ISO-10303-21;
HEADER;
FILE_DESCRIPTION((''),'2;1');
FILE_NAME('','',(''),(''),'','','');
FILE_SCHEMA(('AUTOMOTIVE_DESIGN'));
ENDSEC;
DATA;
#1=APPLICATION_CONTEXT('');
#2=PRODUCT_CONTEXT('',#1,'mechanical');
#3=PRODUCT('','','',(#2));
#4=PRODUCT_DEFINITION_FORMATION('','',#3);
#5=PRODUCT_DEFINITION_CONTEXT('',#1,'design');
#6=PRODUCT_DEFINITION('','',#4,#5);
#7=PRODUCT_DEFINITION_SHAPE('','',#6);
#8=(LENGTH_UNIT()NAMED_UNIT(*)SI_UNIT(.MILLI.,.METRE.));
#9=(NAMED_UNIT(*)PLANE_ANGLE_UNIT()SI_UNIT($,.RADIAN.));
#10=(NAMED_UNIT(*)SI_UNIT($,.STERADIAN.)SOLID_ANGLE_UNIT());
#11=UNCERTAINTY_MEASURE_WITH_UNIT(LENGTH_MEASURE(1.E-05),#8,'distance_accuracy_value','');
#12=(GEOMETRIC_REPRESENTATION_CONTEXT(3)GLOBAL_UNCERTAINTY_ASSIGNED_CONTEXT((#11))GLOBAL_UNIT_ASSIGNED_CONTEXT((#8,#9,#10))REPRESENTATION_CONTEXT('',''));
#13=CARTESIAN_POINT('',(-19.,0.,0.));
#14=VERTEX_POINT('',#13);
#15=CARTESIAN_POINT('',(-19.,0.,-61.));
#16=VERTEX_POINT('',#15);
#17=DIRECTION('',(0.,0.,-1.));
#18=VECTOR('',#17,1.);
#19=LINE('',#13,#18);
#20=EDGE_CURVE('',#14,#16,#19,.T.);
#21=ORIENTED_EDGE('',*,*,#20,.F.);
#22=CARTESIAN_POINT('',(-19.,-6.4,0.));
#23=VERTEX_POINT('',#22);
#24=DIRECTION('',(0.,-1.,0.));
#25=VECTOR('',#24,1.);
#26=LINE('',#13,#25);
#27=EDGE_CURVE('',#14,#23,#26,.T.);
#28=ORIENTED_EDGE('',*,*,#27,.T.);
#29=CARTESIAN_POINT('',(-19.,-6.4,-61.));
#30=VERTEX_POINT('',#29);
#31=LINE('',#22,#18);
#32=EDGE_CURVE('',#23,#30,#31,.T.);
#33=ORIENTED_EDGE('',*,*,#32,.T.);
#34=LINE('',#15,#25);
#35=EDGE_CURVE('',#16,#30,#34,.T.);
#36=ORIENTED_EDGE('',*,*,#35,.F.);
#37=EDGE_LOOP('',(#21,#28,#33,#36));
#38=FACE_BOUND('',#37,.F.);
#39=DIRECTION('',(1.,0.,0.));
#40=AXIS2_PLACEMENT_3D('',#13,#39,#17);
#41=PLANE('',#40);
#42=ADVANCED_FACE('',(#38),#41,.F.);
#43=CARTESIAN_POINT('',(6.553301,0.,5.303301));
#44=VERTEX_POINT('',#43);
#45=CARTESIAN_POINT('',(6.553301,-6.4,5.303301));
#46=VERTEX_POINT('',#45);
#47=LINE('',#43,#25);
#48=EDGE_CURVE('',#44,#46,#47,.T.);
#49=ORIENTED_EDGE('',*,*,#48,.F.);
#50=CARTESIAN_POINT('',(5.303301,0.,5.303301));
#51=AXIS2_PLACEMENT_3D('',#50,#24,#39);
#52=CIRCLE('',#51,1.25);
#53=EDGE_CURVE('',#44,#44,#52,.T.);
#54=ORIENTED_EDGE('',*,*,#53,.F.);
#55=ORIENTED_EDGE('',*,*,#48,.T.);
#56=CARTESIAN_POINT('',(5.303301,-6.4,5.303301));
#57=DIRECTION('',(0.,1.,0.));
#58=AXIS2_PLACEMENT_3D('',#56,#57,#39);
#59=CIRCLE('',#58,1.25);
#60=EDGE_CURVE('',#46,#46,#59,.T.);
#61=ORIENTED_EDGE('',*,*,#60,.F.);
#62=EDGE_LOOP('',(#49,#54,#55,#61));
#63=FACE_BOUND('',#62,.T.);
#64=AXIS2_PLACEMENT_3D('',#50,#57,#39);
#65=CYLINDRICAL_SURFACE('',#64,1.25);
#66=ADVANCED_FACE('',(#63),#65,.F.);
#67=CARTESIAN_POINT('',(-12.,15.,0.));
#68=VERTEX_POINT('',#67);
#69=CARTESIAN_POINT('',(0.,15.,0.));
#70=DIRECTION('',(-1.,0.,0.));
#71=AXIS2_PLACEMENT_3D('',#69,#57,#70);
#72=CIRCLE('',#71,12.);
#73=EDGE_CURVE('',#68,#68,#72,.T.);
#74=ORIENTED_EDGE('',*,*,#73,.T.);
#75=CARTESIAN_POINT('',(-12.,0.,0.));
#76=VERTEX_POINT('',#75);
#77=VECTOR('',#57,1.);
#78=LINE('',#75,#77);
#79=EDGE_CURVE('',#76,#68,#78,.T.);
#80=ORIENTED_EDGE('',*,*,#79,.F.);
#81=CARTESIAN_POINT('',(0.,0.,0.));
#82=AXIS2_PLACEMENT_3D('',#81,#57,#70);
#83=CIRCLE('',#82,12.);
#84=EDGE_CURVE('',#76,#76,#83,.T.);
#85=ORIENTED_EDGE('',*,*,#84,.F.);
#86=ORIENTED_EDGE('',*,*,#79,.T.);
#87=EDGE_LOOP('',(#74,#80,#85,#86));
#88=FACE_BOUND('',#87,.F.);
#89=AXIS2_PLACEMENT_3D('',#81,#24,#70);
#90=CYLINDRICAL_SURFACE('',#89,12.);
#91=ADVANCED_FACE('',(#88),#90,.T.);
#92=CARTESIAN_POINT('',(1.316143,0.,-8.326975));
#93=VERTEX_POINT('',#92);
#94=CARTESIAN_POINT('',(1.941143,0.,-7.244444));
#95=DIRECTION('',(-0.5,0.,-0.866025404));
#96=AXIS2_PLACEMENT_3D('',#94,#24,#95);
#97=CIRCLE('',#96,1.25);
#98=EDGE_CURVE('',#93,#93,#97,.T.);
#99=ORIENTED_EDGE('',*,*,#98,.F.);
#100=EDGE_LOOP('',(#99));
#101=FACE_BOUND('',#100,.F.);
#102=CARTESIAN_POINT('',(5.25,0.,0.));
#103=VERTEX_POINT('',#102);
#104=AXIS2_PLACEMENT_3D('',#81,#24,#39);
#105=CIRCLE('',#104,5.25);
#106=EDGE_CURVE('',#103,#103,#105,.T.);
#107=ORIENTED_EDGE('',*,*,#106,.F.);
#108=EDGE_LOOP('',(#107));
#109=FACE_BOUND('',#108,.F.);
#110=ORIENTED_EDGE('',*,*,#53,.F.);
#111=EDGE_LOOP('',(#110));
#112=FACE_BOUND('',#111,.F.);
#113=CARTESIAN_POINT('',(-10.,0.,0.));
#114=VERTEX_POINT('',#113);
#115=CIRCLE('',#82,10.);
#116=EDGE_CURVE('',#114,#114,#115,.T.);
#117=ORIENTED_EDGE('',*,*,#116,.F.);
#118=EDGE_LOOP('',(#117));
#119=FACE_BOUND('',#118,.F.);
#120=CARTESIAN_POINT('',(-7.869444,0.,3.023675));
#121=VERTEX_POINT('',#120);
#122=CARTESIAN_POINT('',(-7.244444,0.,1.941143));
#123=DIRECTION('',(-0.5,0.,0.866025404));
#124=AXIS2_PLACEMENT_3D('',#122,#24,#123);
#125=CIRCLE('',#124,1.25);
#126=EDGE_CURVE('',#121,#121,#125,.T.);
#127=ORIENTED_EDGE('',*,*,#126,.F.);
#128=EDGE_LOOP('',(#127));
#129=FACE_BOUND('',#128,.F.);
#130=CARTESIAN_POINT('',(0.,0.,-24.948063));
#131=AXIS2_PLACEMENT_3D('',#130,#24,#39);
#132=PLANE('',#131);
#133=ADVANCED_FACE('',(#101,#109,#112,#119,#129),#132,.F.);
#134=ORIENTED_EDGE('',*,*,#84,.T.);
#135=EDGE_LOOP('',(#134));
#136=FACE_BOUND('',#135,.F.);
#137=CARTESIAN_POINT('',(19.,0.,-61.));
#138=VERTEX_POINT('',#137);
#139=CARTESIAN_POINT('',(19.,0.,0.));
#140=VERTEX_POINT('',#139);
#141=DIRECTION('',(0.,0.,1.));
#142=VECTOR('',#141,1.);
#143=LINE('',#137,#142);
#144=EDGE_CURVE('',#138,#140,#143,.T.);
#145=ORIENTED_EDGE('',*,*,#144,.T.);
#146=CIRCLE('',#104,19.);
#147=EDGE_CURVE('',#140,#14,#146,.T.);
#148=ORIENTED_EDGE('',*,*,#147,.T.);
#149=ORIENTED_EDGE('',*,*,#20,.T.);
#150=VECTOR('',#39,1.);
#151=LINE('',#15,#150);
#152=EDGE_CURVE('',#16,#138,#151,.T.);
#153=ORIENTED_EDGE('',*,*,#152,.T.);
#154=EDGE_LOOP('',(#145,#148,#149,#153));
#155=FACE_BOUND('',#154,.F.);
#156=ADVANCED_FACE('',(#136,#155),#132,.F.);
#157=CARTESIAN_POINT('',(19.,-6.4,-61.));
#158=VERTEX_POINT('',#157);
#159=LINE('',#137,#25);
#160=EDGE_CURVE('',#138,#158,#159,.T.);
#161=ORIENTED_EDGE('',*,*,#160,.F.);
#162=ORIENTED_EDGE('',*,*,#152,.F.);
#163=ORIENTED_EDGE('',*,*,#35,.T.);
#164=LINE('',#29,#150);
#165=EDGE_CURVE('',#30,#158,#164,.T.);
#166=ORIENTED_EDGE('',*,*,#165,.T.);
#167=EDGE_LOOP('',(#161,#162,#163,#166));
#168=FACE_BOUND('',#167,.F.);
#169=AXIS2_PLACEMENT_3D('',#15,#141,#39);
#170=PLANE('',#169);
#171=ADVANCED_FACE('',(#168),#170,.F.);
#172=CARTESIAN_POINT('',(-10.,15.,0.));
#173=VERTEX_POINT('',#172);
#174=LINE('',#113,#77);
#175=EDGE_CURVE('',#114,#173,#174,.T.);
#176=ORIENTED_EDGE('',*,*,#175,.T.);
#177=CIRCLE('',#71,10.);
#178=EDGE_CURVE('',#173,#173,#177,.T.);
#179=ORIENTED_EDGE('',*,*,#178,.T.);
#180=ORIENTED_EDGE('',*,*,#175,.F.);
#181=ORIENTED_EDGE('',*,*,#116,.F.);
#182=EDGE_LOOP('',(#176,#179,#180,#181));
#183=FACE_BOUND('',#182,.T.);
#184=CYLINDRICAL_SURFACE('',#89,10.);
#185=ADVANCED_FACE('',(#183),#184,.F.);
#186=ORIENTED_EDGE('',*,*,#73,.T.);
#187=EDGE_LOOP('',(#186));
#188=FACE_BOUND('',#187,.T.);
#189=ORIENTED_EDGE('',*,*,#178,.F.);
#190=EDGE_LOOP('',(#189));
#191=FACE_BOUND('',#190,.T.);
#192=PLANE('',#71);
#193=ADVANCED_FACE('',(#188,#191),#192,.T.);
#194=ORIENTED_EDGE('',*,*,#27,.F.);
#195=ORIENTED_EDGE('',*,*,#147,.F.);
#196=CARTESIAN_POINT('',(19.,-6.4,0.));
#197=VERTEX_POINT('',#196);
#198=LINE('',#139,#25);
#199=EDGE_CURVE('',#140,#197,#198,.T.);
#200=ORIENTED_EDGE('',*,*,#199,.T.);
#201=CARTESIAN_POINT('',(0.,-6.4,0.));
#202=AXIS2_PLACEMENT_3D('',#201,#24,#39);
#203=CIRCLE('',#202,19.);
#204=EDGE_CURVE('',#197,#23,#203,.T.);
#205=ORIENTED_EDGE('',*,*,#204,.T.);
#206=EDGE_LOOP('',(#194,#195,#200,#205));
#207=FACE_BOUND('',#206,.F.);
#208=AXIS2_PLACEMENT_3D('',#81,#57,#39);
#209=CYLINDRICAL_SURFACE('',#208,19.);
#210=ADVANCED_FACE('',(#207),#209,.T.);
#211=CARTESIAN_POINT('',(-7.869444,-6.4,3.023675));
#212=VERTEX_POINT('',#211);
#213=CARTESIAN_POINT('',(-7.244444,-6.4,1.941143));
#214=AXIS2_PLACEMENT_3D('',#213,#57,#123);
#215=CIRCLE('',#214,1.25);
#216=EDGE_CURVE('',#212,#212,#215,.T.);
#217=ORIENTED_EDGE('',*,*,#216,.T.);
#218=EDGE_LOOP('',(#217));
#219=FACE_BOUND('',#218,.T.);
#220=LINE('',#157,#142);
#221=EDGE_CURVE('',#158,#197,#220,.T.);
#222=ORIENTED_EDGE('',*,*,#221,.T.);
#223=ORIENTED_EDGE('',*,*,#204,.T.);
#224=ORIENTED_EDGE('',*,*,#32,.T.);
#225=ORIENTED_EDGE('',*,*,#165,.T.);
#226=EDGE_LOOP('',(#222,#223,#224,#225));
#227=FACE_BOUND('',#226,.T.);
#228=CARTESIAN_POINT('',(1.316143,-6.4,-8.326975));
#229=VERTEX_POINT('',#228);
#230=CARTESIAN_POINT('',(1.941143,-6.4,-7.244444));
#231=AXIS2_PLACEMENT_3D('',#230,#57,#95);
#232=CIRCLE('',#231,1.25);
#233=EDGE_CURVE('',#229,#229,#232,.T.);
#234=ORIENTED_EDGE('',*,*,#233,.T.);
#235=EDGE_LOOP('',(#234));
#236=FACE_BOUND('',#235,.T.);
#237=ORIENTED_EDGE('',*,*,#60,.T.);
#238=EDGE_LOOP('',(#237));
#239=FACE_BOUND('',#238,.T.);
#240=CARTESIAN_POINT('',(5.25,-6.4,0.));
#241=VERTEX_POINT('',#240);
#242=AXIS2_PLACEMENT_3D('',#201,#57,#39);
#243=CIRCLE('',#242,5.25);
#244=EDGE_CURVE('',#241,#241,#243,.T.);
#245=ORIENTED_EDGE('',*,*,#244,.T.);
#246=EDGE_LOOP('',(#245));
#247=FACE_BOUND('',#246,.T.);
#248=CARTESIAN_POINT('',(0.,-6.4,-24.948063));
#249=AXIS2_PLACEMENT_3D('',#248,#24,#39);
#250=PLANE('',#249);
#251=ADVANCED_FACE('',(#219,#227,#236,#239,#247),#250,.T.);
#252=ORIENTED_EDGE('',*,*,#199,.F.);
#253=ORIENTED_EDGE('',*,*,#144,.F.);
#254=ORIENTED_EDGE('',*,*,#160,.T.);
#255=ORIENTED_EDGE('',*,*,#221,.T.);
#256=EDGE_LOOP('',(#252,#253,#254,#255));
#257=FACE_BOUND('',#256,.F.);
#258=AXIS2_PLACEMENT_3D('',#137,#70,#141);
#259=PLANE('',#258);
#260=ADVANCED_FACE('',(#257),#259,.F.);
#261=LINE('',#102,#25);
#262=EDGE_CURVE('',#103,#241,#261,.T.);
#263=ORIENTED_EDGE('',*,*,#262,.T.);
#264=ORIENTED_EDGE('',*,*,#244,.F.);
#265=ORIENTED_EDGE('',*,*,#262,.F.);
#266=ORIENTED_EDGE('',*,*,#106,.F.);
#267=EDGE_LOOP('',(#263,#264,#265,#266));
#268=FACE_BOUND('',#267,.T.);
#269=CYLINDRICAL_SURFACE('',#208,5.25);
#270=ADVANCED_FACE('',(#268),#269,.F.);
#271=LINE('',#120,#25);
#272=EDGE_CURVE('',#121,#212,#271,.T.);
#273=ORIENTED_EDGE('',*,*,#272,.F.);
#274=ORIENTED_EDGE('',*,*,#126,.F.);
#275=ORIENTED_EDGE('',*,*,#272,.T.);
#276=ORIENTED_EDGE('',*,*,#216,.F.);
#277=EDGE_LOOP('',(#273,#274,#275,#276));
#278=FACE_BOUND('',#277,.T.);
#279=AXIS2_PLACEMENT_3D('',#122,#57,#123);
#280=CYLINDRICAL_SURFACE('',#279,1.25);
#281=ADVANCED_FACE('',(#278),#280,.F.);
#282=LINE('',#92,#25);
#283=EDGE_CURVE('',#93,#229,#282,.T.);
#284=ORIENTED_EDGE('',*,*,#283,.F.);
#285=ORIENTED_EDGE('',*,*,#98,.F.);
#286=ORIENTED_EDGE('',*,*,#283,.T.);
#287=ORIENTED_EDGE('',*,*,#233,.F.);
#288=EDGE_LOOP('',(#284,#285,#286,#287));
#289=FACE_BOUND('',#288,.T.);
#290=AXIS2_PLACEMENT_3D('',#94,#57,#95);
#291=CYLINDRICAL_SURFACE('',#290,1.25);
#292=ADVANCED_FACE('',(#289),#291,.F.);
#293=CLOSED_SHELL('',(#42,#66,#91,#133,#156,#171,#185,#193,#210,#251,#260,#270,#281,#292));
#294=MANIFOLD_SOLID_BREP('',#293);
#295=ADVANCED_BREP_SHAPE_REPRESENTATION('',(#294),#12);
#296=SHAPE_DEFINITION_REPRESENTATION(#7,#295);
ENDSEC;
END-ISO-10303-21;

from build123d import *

# Parameters (mm, degrees)
F1_DEPTH        = 6.4
F2_R            = 1.25
F3_DEPTH        = 6.401
F3_COPIES_COUNT = 3
F4_R            = 5.25
F5_DEPTH        = 6.401
F6_R            = 12
F6_R_2          = 10
F7_DEPTH        = 15


# Not quite as in the source:
# - a pattern or mirror of a feature is missing from the dataset's text; its kind, count and spacing are read off the source's solid


with BuildPart() as f1:
    # F0 (on Front) → F1 (new body)
    with BuildSketch(Plane.XZ):
        with BuildLine():
            Line((-19, 0), (-19, -61))
            Line((-19, -61), (19, -61))
            Line((19, -61), (19, 0))
            ThreePointArc((19, 0), (0, 19), (-19, 0))
        make_face()
    extrude(amount=F1_DEPTH)

    # F2 (on Front) → F3 (cut, through all)
    with BuildSketch(Plane.XZ):
        with Locations((5.3033008589, 5.3033008589)):
            Circle(F2_R)
    f3 = extrude(amount=F3_DEPTH, mode=Mode.SUBTRACT)

    # F3_copies: F3 ×3 about axis
    f3_copies_axis = Axis((0, 0, 0), (0, 1, 0))
    for i in range(1, F3_COPIES_COUNT):
        add(f3.rotate(f3_copies_axis, i * 360 / F3_COPIES_COUNT), mode=Mode.SUBTRACT)

    # F4 (on Front) → F5 (cut, through all)
    with BuildSketch(Plane.XZ):
        Circle(F4_R)
    extrude(amount=F5_DEPTH, mode=Mode.SUBTRACT)

    # F6 (on face) → F7 (join)
    with BuildSketch(Plane(origin=(0, 0, 0), x_dir=(-1, 0, 0), z_dir=(0, 1, 0))):
        Circle(F6_R)
        Circle(F6_R_2, mode=Mode.SUBTRACT)
    extrude(amount=F7_DEPTH)


solid = f1.part
